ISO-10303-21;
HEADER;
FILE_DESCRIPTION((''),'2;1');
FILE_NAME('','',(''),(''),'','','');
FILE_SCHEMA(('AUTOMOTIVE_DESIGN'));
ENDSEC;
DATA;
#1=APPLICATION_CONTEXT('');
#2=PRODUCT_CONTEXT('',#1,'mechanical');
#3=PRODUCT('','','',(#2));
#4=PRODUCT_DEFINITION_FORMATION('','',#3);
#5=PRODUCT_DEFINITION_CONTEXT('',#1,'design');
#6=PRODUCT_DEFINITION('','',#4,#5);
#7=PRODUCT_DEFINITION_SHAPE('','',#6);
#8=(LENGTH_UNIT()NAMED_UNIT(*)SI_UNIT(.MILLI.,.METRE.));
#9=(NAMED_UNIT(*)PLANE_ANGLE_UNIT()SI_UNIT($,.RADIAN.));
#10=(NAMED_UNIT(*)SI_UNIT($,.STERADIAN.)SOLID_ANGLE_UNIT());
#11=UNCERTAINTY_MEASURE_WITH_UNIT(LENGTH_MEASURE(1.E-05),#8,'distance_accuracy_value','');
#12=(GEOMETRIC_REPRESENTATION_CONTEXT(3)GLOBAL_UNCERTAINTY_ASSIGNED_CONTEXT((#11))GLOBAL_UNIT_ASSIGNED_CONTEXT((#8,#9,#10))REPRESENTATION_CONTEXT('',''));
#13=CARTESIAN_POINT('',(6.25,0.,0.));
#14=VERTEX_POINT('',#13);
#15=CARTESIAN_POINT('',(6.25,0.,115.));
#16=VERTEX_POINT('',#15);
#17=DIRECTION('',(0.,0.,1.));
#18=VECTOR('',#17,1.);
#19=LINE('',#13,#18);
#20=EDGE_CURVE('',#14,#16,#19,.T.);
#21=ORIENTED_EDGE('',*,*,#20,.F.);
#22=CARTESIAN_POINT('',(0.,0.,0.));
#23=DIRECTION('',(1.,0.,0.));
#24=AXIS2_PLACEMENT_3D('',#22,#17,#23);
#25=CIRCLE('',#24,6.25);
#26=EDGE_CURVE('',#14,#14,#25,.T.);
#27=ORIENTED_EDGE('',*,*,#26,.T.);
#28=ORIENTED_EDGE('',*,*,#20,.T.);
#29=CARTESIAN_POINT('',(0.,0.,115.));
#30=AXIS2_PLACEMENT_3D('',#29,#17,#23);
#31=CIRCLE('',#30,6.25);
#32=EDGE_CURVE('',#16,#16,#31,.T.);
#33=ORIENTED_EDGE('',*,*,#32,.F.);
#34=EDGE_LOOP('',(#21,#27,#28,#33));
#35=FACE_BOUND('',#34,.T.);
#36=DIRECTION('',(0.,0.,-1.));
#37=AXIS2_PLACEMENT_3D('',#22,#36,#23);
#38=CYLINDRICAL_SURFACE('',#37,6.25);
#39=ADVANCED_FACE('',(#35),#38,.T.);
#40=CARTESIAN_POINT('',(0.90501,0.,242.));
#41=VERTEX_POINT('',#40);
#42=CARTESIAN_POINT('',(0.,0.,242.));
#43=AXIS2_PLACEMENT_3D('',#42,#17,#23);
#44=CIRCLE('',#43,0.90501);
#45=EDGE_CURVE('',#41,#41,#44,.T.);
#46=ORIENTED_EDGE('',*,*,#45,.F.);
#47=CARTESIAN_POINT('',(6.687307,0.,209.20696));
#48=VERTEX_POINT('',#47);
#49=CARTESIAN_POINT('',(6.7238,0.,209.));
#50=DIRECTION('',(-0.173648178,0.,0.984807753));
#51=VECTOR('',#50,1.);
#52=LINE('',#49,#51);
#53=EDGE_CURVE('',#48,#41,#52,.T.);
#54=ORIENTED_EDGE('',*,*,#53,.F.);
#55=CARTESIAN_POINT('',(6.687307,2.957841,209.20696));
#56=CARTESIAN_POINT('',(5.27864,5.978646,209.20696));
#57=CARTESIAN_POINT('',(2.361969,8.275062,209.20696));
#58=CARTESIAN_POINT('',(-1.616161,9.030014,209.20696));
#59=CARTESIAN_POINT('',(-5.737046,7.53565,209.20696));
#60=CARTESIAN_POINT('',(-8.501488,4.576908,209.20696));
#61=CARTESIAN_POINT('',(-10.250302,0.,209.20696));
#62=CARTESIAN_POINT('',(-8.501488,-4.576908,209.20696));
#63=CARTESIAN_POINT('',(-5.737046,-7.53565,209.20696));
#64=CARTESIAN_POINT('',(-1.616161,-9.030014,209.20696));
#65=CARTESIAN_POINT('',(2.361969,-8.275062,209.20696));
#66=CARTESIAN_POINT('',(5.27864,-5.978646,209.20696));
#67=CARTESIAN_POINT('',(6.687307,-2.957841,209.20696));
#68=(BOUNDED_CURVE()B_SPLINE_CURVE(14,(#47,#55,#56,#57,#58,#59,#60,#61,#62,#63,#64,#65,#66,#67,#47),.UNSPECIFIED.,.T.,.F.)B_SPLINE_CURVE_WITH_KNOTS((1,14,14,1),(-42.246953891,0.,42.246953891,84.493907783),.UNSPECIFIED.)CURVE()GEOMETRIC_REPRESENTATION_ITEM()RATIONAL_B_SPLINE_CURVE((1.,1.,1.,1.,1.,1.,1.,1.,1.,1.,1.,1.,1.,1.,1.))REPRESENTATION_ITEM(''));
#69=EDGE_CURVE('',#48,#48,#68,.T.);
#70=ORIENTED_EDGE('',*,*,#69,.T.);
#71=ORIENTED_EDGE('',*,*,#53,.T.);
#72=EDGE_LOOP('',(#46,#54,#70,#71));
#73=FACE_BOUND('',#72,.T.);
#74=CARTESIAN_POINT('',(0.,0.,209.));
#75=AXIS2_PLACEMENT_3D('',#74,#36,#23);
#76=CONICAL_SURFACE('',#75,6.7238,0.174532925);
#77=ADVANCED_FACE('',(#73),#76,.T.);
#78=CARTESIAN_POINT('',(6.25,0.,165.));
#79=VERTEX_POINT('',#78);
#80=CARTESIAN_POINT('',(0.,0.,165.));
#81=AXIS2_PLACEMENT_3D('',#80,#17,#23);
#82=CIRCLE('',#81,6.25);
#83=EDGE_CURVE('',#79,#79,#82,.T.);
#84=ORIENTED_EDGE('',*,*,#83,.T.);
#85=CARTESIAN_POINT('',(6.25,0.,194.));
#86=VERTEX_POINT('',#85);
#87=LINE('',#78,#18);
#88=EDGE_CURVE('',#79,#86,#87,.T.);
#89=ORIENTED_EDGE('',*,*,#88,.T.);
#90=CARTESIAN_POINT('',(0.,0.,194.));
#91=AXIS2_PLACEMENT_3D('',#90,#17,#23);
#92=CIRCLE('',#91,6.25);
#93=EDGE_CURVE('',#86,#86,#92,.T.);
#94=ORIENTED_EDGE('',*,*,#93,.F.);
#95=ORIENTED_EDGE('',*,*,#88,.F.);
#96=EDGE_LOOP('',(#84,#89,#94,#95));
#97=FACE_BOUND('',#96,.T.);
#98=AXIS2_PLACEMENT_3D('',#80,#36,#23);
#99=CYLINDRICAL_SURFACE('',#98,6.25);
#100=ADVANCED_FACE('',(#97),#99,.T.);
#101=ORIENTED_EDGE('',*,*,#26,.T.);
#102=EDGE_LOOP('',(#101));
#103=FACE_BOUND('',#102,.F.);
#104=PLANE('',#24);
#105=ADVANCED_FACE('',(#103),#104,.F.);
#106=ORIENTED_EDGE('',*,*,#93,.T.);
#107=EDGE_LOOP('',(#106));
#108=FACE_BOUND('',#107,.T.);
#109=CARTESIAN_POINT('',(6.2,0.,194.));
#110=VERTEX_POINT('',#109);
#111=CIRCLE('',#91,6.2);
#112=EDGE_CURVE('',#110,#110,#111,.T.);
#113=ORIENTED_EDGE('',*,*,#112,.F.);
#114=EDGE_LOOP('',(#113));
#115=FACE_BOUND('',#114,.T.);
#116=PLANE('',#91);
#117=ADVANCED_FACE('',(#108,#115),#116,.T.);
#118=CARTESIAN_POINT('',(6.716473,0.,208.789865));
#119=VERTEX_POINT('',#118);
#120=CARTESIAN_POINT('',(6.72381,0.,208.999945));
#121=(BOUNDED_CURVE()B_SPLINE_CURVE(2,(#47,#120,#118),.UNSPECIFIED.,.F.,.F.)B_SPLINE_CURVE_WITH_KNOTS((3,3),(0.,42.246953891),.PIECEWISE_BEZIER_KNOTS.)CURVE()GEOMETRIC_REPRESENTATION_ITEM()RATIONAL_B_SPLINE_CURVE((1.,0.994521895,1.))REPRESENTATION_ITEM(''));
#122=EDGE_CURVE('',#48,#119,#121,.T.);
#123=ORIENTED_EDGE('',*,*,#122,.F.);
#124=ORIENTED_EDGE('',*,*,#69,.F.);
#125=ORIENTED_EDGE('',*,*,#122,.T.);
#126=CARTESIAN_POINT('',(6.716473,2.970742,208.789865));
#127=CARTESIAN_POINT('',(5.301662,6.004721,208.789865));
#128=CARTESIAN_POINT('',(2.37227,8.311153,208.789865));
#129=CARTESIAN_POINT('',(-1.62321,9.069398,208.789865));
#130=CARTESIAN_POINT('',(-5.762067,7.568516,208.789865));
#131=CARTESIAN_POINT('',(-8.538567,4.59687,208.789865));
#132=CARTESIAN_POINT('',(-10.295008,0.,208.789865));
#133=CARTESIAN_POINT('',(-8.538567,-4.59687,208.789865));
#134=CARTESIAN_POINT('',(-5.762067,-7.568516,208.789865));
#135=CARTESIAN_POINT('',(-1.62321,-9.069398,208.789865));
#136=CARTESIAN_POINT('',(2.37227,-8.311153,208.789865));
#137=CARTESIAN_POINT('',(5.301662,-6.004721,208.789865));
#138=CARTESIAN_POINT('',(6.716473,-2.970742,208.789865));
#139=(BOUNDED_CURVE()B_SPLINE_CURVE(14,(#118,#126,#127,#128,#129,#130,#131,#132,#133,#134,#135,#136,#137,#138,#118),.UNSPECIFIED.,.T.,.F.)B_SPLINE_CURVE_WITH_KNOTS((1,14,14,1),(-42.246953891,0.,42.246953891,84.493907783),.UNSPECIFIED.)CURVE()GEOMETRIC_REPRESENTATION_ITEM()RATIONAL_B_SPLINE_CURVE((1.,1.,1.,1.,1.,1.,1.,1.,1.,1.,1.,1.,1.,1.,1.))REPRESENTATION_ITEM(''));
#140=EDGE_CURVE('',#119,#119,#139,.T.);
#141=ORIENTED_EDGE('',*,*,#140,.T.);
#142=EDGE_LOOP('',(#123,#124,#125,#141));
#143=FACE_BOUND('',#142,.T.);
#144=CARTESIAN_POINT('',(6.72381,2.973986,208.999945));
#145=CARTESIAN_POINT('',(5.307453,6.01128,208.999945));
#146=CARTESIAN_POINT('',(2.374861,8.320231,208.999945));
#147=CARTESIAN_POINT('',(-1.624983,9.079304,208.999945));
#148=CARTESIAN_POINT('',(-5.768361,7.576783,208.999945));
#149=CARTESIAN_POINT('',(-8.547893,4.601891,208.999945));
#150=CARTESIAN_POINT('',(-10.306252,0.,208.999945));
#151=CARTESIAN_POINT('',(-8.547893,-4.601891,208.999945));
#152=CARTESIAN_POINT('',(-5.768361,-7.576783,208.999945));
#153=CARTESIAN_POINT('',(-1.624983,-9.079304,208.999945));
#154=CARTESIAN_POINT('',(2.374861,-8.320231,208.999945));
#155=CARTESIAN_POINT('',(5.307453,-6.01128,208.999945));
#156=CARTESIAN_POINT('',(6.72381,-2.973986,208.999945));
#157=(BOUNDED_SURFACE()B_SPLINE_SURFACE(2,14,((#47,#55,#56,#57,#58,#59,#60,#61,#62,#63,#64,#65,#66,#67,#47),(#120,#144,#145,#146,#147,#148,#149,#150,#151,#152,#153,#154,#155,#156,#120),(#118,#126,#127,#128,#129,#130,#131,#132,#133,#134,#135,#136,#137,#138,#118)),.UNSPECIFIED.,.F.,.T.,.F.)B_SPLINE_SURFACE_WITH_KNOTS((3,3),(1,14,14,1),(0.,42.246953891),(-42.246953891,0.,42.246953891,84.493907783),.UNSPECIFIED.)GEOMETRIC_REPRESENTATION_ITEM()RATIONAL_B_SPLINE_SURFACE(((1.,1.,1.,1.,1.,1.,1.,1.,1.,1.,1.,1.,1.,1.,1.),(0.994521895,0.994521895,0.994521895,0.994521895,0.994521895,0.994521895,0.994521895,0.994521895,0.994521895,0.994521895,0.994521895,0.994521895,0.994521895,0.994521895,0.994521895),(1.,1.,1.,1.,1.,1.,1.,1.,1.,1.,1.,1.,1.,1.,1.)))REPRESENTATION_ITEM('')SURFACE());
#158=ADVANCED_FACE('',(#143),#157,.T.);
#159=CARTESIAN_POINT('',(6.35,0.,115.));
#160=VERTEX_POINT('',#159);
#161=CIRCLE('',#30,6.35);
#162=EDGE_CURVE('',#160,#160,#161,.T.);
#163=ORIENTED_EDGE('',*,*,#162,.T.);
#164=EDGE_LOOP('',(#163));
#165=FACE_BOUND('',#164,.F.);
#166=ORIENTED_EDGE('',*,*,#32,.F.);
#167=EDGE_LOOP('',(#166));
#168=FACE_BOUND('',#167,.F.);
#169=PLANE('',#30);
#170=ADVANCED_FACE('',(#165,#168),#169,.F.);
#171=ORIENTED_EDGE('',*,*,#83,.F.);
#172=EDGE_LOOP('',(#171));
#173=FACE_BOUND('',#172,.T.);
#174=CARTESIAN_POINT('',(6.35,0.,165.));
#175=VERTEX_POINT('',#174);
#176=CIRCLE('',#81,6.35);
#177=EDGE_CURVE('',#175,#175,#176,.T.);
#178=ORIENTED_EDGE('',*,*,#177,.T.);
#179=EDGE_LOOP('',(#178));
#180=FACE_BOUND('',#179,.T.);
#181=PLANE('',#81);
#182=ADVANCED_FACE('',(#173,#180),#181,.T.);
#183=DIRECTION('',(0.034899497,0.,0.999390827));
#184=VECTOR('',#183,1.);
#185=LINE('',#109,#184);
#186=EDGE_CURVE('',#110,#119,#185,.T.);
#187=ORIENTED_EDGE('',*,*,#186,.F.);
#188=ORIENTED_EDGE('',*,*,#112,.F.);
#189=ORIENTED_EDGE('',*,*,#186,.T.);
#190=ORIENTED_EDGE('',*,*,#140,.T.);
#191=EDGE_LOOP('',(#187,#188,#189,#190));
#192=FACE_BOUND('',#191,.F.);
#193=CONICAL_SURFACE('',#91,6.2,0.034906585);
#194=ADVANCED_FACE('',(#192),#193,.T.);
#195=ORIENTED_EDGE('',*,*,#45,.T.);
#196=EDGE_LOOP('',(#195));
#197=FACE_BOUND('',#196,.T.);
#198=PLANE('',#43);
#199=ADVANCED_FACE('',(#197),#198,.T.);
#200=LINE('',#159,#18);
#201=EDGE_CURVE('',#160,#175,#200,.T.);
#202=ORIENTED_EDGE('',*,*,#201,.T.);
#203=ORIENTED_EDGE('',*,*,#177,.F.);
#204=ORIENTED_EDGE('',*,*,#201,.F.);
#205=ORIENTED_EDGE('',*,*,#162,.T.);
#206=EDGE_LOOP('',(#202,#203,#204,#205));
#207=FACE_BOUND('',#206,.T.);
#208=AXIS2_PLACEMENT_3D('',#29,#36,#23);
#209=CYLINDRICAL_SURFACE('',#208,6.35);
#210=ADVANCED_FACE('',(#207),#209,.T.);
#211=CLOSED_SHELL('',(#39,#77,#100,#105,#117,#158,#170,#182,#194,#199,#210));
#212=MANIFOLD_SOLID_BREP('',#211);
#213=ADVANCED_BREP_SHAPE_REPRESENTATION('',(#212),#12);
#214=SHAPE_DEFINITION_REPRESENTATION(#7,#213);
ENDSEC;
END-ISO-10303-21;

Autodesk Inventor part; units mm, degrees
ref_plane "YZ Plane" through (0, 0, 0) normal (1, 0, 0) x (0, 1, 0)
ref_plane "XZ Plane" through (0, 0, 0) normal (0, 1, 0) x (-1, 0, 0)
ref_plane "XY Plane" through (0, 0, 0) normal (0, 0, 1) x (1, 0, 0)
sketch "スケッチ5" plane through (0, 0, 0) normal (0, 0, 1) x (1, 0, 0)
  circle A0 centre (0, 0) radius 6.25
  dimension "d14" = 12.5
extrude "押し出し5" add sketch "スケッチ5" along normal blind 115
sketch "スケッチ6" plane through (0, 0, 115) normal (0, 0, 1) x (1, 0, 0)
  circle A0 centre (0, 0) radius 6.35
  dimension "d17" = 12.7
extrude "押し出し6" add sketch "スケッチ6" along normal blind 50
sketch "スケッチ7" plane through (0, 0, 165) normal (0, 0, 1) x (1, 0, 0)
  circle A0 centre (0, 0) radius 6.25
  dimension "d20" = 12.5
extrude "押し出し7" add sketch "スケッチ7" along normal blind 29
sketch "スケッチ8" plane through (0, 0, 194) normal (0, 0, 1) x (1, 0, 0)
  circle A0 centre (0, 0) radius 6.2
  dimension "d23" = 12.4
extrude "押し出し8" add sketch "スケッチ8" along normal blind 15 draft 2
sketch "スケッチ9" plane through (0, 0, 209) normal (0, 0, 1) x (1, 0, 0)
  circle A0 centre (0, 0) radius 6.7238
extrude "押し出し9" add sketch "スケッチ9" along normal blind 33 draft -10
fillet "フィレット3" radius 2 1 edges at (-6.7238, 0, 209)
properties part number "hude"
